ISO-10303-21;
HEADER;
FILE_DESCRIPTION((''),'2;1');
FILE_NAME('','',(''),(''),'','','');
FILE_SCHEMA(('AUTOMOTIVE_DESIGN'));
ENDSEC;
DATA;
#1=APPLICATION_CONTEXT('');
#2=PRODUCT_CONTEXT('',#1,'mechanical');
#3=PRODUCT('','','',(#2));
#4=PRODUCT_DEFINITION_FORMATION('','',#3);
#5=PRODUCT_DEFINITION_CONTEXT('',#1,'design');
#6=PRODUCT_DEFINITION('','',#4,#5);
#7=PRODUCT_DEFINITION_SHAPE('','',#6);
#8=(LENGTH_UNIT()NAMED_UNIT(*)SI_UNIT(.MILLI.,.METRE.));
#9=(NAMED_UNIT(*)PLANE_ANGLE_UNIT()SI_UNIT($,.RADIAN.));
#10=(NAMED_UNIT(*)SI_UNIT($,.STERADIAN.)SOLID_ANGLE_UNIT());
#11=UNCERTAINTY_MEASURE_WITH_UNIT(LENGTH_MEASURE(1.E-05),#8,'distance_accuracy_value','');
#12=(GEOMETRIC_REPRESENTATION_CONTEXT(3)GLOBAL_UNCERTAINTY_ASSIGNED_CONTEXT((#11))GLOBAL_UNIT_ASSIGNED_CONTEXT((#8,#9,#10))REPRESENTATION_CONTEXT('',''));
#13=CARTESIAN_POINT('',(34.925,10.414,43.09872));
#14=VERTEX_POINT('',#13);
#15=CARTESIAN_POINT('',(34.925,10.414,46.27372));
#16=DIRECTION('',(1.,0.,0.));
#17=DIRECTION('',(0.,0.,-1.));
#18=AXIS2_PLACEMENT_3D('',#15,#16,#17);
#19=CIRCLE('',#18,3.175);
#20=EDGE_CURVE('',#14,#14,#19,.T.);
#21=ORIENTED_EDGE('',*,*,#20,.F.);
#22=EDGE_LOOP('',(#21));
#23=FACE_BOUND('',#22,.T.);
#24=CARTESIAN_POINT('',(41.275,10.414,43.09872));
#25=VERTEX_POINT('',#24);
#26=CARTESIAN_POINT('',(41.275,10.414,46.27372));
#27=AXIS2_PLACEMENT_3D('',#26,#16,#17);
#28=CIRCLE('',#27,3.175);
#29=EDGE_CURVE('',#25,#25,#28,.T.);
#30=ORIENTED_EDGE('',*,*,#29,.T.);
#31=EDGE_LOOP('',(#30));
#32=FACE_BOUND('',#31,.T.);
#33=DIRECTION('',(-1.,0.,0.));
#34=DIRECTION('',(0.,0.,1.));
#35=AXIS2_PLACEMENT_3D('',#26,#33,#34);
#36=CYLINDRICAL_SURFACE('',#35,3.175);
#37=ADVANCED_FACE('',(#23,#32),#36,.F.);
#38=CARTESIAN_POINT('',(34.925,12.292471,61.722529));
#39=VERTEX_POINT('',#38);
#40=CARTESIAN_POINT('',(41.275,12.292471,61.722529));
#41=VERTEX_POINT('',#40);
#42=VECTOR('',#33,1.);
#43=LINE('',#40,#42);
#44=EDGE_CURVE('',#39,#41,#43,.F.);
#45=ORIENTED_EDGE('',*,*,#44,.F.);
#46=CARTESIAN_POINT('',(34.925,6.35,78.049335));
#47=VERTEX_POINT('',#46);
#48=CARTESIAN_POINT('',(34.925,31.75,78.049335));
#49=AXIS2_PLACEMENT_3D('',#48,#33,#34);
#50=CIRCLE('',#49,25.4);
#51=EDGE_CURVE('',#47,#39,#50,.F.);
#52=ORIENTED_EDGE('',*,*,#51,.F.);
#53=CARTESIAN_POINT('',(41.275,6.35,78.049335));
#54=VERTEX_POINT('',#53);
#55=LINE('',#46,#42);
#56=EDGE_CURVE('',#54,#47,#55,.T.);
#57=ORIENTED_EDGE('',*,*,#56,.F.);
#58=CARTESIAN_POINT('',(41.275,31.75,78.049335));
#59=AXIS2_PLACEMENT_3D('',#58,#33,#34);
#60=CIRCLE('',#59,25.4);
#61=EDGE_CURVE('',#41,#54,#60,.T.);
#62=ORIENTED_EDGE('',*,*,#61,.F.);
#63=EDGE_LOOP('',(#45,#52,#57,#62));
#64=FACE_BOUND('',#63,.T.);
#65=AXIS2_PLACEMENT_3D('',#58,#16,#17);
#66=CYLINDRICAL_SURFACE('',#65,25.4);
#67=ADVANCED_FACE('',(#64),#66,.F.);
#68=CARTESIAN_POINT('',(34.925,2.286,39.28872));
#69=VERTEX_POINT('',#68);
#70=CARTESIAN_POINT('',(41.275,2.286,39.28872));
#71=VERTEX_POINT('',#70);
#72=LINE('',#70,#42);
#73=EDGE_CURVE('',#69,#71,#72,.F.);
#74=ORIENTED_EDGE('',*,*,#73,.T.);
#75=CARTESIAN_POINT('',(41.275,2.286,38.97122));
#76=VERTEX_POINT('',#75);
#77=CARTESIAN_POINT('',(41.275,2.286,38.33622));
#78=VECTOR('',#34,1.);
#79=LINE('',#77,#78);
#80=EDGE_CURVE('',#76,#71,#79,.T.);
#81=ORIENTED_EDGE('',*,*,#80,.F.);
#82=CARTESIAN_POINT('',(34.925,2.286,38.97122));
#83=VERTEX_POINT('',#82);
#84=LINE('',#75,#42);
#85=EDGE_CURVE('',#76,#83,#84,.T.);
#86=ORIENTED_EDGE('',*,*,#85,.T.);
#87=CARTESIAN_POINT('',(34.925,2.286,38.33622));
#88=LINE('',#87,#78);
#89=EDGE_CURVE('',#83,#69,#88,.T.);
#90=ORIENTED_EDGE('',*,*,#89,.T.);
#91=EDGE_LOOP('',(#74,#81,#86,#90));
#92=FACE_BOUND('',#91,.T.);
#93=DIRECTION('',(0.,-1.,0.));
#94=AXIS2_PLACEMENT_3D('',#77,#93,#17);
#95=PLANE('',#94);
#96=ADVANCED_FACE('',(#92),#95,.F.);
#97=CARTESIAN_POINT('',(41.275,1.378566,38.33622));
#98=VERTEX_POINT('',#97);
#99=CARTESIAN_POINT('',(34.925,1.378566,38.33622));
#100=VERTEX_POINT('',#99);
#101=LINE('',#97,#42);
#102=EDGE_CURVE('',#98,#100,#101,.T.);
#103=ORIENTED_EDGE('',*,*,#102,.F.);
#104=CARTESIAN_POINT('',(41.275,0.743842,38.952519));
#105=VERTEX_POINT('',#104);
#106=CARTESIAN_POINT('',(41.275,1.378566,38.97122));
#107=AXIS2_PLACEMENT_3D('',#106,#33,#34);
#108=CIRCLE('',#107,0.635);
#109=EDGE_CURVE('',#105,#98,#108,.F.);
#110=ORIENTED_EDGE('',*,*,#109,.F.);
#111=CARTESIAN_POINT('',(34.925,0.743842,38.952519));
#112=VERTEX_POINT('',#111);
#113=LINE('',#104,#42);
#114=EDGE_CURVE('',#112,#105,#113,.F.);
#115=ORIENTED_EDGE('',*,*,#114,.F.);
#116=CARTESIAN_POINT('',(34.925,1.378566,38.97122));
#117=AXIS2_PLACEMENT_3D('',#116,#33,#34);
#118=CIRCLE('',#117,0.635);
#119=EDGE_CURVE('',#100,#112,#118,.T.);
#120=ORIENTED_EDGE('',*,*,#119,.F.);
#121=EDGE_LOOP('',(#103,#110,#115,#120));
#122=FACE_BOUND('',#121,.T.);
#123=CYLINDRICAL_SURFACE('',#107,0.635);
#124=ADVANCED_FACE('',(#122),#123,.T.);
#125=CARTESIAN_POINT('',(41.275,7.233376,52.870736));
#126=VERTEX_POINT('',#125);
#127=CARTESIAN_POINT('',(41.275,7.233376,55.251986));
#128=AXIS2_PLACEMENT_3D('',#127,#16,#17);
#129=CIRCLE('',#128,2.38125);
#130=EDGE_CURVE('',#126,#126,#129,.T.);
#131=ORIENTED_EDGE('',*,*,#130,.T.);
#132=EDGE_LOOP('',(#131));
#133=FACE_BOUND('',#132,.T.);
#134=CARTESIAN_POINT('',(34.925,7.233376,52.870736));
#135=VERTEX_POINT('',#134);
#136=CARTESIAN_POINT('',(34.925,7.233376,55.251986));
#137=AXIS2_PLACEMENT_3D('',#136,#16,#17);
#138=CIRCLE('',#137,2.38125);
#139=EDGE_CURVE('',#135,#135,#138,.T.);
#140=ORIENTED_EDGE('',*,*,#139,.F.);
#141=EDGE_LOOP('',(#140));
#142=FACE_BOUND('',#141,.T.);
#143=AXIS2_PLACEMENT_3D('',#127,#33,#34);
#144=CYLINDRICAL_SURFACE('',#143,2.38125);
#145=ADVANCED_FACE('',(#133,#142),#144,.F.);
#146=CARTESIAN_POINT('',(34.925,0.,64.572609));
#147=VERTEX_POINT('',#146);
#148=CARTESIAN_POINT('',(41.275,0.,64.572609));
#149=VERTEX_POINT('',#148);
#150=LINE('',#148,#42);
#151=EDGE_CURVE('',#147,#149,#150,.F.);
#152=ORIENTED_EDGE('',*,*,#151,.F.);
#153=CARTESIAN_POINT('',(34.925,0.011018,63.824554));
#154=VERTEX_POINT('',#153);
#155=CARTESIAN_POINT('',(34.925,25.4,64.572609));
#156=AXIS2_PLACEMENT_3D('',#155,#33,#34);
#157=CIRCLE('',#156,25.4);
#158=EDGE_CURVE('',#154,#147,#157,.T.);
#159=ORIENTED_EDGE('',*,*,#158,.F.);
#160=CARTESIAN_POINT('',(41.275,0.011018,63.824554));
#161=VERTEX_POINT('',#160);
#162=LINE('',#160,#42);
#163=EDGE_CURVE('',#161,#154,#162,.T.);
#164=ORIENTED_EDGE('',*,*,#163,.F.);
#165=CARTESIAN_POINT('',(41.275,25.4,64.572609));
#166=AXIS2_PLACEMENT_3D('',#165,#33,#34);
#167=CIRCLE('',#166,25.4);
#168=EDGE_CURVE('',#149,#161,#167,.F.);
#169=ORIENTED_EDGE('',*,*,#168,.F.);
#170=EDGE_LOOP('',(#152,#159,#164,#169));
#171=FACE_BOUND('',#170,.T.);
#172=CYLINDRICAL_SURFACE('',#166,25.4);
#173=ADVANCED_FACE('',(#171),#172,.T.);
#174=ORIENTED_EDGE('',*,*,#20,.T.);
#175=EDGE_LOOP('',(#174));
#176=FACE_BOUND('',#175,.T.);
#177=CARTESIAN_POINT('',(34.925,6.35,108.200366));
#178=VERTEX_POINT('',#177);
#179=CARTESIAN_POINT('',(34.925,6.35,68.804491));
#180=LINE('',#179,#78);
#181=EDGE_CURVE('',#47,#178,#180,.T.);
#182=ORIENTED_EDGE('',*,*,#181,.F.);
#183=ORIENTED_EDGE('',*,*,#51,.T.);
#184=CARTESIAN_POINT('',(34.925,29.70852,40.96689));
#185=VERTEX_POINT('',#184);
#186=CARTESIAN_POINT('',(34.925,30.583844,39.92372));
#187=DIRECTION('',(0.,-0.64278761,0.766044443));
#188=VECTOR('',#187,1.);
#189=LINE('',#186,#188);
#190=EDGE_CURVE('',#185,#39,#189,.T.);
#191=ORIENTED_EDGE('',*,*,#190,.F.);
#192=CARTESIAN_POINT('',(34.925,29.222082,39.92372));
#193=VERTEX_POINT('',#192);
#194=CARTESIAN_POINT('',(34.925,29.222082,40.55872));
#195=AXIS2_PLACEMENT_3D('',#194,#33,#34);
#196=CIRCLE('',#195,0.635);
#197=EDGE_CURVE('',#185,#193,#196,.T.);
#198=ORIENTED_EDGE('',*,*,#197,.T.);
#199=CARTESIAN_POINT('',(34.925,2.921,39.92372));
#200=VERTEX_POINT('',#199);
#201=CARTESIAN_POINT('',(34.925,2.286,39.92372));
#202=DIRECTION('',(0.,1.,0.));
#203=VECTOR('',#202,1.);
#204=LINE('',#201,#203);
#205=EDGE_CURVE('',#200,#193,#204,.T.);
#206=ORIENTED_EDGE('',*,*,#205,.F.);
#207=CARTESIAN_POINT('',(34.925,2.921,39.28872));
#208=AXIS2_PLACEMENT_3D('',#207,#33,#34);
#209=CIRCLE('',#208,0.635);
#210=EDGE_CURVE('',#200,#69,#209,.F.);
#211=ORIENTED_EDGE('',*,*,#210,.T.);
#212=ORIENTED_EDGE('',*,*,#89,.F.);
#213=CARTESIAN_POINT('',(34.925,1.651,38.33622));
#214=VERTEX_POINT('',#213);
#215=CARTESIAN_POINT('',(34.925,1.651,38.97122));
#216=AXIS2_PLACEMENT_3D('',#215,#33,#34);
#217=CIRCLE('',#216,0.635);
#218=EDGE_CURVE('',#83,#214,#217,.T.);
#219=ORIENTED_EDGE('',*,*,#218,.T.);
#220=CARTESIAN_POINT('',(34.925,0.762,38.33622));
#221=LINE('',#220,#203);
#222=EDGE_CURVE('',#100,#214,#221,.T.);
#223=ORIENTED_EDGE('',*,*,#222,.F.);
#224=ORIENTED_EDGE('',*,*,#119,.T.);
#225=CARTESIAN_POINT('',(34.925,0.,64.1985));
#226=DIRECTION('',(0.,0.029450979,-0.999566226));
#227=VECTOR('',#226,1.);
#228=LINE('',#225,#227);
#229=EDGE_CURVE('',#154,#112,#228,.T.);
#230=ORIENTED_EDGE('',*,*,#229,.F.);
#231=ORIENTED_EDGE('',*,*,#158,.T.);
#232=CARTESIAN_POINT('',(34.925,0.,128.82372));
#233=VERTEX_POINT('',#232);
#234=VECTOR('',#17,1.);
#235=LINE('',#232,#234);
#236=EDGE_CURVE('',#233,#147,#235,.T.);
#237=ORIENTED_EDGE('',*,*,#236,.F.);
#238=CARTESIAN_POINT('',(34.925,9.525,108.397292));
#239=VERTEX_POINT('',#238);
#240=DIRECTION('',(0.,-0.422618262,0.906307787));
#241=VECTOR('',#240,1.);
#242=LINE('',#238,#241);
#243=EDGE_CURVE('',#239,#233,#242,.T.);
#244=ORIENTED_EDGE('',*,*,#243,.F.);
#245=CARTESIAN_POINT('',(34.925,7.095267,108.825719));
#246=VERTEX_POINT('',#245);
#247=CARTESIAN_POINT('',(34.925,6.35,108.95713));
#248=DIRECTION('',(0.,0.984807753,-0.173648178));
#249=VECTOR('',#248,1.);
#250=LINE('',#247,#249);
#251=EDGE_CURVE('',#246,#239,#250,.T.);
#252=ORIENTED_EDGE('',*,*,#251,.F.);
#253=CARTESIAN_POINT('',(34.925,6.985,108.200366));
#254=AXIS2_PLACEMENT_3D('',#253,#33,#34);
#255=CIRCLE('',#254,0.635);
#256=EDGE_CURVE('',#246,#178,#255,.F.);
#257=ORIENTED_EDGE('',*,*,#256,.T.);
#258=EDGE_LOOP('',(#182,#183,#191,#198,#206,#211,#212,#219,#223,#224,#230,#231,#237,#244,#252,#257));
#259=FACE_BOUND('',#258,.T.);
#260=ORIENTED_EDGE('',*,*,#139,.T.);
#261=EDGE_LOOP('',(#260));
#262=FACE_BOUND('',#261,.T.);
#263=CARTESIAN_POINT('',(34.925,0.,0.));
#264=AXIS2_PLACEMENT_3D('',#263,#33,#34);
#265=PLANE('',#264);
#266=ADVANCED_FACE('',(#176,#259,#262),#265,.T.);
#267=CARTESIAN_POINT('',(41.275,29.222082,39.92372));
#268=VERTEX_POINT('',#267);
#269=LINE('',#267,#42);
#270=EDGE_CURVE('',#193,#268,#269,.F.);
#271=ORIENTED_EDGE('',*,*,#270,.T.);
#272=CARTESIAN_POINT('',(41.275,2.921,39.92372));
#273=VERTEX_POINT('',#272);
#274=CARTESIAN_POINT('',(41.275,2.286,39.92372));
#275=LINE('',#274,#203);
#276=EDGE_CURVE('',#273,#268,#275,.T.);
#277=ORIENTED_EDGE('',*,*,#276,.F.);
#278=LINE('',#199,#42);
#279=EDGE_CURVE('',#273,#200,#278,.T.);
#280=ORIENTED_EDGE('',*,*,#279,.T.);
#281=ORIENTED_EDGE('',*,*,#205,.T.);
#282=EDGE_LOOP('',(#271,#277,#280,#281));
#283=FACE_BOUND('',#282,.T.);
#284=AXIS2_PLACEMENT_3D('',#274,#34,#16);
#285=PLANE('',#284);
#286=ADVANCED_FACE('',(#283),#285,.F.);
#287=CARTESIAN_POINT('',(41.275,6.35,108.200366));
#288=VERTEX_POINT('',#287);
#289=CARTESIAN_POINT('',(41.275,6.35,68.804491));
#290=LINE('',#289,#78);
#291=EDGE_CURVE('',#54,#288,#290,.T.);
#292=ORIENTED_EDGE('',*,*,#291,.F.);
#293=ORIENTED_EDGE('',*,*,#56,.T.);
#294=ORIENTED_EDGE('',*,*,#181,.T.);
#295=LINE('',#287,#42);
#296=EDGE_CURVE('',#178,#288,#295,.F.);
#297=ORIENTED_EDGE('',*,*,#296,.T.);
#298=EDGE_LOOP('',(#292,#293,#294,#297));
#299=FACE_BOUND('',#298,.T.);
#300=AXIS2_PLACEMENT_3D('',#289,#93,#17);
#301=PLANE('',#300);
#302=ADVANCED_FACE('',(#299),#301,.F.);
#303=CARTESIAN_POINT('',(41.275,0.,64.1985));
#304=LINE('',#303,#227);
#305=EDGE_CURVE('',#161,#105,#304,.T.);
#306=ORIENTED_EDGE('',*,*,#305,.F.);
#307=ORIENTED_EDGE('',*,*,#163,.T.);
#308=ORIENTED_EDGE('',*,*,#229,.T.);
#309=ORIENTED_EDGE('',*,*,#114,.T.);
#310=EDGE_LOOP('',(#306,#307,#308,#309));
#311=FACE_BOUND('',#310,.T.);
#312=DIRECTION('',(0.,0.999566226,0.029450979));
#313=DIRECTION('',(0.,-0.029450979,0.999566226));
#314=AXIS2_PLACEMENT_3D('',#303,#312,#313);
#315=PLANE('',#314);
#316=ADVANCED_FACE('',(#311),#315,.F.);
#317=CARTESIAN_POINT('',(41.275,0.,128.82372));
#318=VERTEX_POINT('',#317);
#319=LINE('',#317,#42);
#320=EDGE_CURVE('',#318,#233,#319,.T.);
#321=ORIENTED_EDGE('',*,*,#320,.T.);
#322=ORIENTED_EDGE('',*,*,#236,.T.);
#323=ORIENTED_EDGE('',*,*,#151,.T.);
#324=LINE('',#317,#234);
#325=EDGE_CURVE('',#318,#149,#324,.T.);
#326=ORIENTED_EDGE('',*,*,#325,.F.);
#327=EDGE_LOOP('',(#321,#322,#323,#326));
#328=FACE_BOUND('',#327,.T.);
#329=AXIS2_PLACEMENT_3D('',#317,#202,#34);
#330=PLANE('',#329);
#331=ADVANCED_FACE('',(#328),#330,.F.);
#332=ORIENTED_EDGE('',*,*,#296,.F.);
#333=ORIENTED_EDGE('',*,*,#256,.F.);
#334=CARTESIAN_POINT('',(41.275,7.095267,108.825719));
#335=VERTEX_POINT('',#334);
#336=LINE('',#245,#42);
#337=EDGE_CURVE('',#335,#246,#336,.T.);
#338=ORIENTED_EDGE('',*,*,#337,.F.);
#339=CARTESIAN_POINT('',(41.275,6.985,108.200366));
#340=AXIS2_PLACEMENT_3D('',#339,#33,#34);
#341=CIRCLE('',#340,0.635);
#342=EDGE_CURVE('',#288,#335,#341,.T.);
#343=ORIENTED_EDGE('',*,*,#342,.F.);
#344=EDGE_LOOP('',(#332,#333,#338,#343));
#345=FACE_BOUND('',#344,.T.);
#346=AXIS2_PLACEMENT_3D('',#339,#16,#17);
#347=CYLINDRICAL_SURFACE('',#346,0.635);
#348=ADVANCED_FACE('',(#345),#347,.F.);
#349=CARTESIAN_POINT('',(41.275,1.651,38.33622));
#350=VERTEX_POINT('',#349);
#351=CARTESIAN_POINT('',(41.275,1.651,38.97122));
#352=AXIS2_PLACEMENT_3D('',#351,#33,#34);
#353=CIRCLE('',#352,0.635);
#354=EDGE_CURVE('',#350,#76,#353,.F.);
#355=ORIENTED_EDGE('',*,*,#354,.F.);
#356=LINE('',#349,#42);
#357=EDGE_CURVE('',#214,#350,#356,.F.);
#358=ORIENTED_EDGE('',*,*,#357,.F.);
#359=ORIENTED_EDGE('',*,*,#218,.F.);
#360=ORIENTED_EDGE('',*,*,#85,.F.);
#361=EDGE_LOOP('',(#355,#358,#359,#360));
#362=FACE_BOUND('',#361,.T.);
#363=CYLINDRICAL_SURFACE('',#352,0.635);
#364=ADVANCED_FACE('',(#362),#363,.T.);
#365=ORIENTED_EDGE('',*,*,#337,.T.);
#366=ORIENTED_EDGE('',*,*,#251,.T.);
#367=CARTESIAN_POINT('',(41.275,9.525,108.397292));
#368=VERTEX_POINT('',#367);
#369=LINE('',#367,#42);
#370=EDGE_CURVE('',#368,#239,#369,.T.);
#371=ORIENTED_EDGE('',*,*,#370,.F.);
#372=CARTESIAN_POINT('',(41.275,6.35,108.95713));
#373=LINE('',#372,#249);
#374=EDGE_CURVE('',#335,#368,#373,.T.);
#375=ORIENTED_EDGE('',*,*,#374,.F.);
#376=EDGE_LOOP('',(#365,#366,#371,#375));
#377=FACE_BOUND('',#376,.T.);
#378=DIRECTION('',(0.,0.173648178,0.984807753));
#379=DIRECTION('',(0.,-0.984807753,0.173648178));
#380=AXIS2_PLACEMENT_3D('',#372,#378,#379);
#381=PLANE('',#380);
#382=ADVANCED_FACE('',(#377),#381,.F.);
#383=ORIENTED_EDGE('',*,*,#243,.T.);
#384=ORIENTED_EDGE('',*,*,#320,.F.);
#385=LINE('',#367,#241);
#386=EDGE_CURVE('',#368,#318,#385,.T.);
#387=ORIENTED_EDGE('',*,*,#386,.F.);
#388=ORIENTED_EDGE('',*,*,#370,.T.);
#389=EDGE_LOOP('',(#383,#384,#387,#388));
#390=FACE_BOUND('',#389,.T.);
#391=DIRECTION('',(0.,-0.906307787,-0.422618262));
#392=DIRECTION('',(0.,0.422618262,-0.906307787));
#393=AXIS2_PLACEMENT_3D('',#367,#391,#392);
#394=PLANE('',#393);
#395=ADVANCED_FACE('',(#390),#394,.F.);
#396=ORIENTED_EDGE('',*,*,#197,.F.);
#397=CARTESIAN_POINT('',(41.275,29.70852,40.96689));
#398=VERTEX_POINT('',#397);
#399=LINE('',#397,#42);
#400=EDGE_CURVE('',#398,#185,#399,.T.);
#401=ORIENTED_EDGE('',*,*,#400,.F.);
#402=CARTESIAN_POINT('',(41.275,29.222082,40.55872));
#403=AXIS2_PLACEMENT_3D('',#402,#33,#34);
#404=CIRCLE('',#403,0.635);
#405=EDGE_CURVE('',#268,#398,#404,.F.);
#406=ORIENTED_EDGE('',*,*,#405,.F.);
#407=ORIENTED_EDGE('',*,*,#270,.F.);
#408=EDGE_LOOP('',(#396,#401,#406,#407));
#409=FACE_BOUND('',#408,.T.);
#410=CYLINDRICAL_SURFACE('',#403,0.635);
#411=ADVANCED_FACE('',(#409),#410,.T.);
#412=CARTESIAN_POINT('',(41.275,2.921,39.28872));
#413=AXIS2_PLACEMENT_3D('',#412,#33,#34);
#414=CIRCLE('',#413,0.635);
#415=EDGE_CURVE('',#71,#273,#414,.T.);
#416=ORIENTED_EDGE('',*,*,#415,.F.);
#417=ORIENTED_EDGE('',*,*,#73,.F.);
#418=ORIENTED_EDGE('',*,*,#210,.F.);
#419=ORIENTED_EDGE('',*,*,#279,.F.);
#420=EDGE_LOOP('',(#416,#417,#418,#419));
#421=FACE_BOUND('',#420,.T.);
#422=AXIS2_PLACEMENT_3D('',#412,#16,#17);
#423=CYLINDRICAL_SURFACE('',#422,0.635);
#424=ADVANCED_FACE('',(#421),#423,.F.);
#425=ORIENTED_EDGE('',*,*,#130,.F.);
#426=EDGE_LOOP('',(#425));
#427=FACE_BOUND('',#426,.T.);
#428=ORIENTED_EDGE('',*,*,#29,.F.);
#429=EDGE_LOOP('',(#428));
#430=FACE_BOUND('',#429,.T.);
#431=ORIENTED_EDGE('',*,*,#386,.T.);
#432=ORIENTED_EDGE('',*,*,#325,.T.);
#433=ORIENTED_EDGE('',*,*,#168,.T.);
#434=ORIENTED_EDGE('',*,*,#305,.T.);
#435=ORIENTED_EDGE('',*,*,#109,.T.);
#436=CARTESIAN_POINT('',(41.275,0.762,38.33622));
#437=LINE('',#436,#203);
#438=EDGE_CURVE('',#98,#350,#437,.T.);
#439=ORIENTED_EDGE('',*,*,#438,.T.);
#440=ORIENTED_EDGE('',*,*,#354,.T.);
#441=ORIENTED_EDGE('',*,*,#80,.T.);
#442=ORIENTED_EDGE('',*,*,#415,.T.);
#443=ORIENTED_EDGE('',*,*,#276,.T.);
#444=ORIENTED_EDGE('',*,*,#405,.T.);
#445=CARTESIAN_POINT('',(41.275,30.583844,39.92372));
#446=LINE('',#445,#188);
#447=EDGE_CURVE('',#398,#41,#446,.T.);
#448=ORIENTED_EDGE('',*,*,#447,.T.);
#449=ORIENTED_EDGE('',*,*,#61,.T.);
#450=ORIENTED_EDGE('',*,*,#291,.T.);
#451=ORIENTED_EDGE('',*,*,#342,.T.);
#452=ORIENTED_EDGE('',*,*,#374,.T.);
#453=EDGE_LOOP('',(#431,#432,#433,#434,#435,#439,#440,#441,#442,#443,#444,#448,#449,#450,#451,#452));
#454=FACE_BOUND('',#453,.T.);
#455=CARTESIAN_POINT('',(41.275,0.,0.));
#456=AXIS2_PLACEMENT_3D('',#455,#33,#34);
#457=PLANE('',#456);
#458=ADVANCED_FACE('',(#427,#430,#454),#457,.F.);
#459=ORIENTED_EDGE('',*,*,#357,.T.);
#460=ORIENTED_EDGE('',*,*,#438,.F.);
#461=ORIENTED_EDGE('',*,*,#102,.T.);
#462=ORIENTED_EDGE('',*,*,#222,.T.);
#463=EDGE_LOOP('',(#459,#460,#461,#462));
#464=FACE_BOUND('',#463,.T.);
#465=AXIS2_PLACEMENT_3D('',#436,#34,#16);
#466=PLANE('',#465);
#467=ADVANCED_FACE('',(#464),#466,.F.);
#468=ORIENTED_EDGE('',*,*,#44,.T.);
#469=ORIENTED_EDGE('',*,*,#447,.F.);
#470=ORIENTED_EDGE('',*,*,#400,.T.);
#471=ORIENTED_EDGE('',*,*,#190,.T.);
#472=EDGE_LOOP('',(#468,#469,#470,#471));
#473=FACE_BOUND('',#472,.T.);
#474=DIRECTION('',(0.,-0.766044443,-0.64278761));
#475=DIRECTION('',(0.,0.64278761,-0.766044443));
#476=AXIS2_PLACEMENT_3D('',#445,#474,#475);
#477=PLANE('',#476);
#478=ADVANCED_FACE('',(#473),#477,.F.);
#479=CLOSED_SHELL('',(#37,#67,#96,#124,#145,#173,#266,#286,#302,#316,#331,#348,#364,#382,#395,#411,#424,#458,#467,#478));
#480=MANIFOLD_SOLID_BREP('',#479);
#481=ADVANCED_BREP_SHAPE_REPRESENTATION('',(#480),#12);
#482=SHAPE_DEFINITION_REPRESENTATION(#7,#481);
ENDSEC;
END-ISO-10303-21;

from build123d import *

# Parameters (mm, degrees)
STOCK_BEE_ZERKER_START                       = 34.925
STOCK_BEE_ZERKER_2_0_MULTIBODY_1_OUTLINE_R   = 2.38125
STOCK_BEE_ZERKER_2_0_MULTIBODY_1_OUTLINE_R_2 = 3.175
STOCK_BEE_ZERKER_2_0_MULTIBODY_1_DEPTH       = 6.35
FILLET1_R                                    = 0.635
FILLET2_R                                    = 25.4


# Read off the part's stored shape, not the designer's step: Stock-Bee-zerker 2.0 Multibody-1
with BuildPart() as part:
    # Stock-Bee-zerker 2.0 Multibody-1 outline → Stock-Bee-zerker 2.0 Multibody-1 (new body)
    with BuildSketch(Plane.YZ.offset(STOCK_BEE_ZERKER_START)):
        Polygon((9.525, 108.397291582), (0, 128.82372), (0, 64.1985), (0.762, 38.33622), (2.286, 38.33622), (2.286, 39.92372), (30.58384403, 39.92372), (6.35, 68.804490685), (6.35, 108.957129746), align=None)
        with Locations((7.233375897, 55.251985719)):
            Circle(STOCK_BEE_ZERKER_2_0_MULTIBODY_1_OUTLINE_R, mode=Mode.SUBTRACT)
        with Locations((10.414, 46.27372)):
            Circle(STOCK_BEE_ZERKER_2_0_MULTIBODY_1_OUTLINE_R_2, mode=Mode.SUBTRACT)
    extrude(amount=STOCK_BEE_ZERKER_2_0_MULTIBODY_1_DEPTH)

    # Fillet1
    fillet1_edges = [part.edges().sort_by_distance(p)[0] for p in [
        (38.1, 6.35, 108.957129746),
        (38.1, 30.58384403, 39.92372),
        (38.1, 2.286, 39.92372),
        (38.1, 2.286, 38.33622),
        (38.1, 0.762, 38.33622),
    ]]
    fillet(fillet1_edges, radius=FILLET1_R)

    # Fillet2
    # the kernel refuses this fillet: 25.4 mm, written as the material it adds along each edge
    with BuildSketch(Plane(origin=(34.925, 6.35, 68.804490685), x_dir=(0, 0, 1), z_dir=(1, 0, 0))) as fillet2_piece_1:
        with BuildLine():
            CenterArc((FILLET2_R * 0.363970234267, -FILLET2_R), FILLET2_R, 90, 40)
            Line((-FILLET2_R * 0.278817375421, -FILLET2_R * 0.233955556882), (0, 0))
            Line((0, 0), (FILLET2_R * 0.363970234267, 0))
        make_face()
    extrude(amount=6.35)
    # the kernel refuses this fillet: 25.4 mm, written as the material it takes off along each edge
    with BuildSketch(Plane(origin=(33.98972857, 0, 64.1985), x_dir=(0, 0.029450978958150506, -0.9995662258391919), z_dir=(1, 0, 0))) as fillet2_2_piece_1:
        with BuildLine():
            CenterArc((FILLET2_R * 0.0147286839403, FILLET2_R), FILLET2_R, 268.312339175, 1.687660825)
            Line((-FILLET2_R * 0.0147222950178, FILLET2_R * 0.000433774160808), (0, 0))
            Line((0, 0), (FILLET2_R * 0.0147286839403, 0))
        make_face()
    extrude(amount=8.22054286, mode=Mode.SUBTRACT)


solid = part.part
